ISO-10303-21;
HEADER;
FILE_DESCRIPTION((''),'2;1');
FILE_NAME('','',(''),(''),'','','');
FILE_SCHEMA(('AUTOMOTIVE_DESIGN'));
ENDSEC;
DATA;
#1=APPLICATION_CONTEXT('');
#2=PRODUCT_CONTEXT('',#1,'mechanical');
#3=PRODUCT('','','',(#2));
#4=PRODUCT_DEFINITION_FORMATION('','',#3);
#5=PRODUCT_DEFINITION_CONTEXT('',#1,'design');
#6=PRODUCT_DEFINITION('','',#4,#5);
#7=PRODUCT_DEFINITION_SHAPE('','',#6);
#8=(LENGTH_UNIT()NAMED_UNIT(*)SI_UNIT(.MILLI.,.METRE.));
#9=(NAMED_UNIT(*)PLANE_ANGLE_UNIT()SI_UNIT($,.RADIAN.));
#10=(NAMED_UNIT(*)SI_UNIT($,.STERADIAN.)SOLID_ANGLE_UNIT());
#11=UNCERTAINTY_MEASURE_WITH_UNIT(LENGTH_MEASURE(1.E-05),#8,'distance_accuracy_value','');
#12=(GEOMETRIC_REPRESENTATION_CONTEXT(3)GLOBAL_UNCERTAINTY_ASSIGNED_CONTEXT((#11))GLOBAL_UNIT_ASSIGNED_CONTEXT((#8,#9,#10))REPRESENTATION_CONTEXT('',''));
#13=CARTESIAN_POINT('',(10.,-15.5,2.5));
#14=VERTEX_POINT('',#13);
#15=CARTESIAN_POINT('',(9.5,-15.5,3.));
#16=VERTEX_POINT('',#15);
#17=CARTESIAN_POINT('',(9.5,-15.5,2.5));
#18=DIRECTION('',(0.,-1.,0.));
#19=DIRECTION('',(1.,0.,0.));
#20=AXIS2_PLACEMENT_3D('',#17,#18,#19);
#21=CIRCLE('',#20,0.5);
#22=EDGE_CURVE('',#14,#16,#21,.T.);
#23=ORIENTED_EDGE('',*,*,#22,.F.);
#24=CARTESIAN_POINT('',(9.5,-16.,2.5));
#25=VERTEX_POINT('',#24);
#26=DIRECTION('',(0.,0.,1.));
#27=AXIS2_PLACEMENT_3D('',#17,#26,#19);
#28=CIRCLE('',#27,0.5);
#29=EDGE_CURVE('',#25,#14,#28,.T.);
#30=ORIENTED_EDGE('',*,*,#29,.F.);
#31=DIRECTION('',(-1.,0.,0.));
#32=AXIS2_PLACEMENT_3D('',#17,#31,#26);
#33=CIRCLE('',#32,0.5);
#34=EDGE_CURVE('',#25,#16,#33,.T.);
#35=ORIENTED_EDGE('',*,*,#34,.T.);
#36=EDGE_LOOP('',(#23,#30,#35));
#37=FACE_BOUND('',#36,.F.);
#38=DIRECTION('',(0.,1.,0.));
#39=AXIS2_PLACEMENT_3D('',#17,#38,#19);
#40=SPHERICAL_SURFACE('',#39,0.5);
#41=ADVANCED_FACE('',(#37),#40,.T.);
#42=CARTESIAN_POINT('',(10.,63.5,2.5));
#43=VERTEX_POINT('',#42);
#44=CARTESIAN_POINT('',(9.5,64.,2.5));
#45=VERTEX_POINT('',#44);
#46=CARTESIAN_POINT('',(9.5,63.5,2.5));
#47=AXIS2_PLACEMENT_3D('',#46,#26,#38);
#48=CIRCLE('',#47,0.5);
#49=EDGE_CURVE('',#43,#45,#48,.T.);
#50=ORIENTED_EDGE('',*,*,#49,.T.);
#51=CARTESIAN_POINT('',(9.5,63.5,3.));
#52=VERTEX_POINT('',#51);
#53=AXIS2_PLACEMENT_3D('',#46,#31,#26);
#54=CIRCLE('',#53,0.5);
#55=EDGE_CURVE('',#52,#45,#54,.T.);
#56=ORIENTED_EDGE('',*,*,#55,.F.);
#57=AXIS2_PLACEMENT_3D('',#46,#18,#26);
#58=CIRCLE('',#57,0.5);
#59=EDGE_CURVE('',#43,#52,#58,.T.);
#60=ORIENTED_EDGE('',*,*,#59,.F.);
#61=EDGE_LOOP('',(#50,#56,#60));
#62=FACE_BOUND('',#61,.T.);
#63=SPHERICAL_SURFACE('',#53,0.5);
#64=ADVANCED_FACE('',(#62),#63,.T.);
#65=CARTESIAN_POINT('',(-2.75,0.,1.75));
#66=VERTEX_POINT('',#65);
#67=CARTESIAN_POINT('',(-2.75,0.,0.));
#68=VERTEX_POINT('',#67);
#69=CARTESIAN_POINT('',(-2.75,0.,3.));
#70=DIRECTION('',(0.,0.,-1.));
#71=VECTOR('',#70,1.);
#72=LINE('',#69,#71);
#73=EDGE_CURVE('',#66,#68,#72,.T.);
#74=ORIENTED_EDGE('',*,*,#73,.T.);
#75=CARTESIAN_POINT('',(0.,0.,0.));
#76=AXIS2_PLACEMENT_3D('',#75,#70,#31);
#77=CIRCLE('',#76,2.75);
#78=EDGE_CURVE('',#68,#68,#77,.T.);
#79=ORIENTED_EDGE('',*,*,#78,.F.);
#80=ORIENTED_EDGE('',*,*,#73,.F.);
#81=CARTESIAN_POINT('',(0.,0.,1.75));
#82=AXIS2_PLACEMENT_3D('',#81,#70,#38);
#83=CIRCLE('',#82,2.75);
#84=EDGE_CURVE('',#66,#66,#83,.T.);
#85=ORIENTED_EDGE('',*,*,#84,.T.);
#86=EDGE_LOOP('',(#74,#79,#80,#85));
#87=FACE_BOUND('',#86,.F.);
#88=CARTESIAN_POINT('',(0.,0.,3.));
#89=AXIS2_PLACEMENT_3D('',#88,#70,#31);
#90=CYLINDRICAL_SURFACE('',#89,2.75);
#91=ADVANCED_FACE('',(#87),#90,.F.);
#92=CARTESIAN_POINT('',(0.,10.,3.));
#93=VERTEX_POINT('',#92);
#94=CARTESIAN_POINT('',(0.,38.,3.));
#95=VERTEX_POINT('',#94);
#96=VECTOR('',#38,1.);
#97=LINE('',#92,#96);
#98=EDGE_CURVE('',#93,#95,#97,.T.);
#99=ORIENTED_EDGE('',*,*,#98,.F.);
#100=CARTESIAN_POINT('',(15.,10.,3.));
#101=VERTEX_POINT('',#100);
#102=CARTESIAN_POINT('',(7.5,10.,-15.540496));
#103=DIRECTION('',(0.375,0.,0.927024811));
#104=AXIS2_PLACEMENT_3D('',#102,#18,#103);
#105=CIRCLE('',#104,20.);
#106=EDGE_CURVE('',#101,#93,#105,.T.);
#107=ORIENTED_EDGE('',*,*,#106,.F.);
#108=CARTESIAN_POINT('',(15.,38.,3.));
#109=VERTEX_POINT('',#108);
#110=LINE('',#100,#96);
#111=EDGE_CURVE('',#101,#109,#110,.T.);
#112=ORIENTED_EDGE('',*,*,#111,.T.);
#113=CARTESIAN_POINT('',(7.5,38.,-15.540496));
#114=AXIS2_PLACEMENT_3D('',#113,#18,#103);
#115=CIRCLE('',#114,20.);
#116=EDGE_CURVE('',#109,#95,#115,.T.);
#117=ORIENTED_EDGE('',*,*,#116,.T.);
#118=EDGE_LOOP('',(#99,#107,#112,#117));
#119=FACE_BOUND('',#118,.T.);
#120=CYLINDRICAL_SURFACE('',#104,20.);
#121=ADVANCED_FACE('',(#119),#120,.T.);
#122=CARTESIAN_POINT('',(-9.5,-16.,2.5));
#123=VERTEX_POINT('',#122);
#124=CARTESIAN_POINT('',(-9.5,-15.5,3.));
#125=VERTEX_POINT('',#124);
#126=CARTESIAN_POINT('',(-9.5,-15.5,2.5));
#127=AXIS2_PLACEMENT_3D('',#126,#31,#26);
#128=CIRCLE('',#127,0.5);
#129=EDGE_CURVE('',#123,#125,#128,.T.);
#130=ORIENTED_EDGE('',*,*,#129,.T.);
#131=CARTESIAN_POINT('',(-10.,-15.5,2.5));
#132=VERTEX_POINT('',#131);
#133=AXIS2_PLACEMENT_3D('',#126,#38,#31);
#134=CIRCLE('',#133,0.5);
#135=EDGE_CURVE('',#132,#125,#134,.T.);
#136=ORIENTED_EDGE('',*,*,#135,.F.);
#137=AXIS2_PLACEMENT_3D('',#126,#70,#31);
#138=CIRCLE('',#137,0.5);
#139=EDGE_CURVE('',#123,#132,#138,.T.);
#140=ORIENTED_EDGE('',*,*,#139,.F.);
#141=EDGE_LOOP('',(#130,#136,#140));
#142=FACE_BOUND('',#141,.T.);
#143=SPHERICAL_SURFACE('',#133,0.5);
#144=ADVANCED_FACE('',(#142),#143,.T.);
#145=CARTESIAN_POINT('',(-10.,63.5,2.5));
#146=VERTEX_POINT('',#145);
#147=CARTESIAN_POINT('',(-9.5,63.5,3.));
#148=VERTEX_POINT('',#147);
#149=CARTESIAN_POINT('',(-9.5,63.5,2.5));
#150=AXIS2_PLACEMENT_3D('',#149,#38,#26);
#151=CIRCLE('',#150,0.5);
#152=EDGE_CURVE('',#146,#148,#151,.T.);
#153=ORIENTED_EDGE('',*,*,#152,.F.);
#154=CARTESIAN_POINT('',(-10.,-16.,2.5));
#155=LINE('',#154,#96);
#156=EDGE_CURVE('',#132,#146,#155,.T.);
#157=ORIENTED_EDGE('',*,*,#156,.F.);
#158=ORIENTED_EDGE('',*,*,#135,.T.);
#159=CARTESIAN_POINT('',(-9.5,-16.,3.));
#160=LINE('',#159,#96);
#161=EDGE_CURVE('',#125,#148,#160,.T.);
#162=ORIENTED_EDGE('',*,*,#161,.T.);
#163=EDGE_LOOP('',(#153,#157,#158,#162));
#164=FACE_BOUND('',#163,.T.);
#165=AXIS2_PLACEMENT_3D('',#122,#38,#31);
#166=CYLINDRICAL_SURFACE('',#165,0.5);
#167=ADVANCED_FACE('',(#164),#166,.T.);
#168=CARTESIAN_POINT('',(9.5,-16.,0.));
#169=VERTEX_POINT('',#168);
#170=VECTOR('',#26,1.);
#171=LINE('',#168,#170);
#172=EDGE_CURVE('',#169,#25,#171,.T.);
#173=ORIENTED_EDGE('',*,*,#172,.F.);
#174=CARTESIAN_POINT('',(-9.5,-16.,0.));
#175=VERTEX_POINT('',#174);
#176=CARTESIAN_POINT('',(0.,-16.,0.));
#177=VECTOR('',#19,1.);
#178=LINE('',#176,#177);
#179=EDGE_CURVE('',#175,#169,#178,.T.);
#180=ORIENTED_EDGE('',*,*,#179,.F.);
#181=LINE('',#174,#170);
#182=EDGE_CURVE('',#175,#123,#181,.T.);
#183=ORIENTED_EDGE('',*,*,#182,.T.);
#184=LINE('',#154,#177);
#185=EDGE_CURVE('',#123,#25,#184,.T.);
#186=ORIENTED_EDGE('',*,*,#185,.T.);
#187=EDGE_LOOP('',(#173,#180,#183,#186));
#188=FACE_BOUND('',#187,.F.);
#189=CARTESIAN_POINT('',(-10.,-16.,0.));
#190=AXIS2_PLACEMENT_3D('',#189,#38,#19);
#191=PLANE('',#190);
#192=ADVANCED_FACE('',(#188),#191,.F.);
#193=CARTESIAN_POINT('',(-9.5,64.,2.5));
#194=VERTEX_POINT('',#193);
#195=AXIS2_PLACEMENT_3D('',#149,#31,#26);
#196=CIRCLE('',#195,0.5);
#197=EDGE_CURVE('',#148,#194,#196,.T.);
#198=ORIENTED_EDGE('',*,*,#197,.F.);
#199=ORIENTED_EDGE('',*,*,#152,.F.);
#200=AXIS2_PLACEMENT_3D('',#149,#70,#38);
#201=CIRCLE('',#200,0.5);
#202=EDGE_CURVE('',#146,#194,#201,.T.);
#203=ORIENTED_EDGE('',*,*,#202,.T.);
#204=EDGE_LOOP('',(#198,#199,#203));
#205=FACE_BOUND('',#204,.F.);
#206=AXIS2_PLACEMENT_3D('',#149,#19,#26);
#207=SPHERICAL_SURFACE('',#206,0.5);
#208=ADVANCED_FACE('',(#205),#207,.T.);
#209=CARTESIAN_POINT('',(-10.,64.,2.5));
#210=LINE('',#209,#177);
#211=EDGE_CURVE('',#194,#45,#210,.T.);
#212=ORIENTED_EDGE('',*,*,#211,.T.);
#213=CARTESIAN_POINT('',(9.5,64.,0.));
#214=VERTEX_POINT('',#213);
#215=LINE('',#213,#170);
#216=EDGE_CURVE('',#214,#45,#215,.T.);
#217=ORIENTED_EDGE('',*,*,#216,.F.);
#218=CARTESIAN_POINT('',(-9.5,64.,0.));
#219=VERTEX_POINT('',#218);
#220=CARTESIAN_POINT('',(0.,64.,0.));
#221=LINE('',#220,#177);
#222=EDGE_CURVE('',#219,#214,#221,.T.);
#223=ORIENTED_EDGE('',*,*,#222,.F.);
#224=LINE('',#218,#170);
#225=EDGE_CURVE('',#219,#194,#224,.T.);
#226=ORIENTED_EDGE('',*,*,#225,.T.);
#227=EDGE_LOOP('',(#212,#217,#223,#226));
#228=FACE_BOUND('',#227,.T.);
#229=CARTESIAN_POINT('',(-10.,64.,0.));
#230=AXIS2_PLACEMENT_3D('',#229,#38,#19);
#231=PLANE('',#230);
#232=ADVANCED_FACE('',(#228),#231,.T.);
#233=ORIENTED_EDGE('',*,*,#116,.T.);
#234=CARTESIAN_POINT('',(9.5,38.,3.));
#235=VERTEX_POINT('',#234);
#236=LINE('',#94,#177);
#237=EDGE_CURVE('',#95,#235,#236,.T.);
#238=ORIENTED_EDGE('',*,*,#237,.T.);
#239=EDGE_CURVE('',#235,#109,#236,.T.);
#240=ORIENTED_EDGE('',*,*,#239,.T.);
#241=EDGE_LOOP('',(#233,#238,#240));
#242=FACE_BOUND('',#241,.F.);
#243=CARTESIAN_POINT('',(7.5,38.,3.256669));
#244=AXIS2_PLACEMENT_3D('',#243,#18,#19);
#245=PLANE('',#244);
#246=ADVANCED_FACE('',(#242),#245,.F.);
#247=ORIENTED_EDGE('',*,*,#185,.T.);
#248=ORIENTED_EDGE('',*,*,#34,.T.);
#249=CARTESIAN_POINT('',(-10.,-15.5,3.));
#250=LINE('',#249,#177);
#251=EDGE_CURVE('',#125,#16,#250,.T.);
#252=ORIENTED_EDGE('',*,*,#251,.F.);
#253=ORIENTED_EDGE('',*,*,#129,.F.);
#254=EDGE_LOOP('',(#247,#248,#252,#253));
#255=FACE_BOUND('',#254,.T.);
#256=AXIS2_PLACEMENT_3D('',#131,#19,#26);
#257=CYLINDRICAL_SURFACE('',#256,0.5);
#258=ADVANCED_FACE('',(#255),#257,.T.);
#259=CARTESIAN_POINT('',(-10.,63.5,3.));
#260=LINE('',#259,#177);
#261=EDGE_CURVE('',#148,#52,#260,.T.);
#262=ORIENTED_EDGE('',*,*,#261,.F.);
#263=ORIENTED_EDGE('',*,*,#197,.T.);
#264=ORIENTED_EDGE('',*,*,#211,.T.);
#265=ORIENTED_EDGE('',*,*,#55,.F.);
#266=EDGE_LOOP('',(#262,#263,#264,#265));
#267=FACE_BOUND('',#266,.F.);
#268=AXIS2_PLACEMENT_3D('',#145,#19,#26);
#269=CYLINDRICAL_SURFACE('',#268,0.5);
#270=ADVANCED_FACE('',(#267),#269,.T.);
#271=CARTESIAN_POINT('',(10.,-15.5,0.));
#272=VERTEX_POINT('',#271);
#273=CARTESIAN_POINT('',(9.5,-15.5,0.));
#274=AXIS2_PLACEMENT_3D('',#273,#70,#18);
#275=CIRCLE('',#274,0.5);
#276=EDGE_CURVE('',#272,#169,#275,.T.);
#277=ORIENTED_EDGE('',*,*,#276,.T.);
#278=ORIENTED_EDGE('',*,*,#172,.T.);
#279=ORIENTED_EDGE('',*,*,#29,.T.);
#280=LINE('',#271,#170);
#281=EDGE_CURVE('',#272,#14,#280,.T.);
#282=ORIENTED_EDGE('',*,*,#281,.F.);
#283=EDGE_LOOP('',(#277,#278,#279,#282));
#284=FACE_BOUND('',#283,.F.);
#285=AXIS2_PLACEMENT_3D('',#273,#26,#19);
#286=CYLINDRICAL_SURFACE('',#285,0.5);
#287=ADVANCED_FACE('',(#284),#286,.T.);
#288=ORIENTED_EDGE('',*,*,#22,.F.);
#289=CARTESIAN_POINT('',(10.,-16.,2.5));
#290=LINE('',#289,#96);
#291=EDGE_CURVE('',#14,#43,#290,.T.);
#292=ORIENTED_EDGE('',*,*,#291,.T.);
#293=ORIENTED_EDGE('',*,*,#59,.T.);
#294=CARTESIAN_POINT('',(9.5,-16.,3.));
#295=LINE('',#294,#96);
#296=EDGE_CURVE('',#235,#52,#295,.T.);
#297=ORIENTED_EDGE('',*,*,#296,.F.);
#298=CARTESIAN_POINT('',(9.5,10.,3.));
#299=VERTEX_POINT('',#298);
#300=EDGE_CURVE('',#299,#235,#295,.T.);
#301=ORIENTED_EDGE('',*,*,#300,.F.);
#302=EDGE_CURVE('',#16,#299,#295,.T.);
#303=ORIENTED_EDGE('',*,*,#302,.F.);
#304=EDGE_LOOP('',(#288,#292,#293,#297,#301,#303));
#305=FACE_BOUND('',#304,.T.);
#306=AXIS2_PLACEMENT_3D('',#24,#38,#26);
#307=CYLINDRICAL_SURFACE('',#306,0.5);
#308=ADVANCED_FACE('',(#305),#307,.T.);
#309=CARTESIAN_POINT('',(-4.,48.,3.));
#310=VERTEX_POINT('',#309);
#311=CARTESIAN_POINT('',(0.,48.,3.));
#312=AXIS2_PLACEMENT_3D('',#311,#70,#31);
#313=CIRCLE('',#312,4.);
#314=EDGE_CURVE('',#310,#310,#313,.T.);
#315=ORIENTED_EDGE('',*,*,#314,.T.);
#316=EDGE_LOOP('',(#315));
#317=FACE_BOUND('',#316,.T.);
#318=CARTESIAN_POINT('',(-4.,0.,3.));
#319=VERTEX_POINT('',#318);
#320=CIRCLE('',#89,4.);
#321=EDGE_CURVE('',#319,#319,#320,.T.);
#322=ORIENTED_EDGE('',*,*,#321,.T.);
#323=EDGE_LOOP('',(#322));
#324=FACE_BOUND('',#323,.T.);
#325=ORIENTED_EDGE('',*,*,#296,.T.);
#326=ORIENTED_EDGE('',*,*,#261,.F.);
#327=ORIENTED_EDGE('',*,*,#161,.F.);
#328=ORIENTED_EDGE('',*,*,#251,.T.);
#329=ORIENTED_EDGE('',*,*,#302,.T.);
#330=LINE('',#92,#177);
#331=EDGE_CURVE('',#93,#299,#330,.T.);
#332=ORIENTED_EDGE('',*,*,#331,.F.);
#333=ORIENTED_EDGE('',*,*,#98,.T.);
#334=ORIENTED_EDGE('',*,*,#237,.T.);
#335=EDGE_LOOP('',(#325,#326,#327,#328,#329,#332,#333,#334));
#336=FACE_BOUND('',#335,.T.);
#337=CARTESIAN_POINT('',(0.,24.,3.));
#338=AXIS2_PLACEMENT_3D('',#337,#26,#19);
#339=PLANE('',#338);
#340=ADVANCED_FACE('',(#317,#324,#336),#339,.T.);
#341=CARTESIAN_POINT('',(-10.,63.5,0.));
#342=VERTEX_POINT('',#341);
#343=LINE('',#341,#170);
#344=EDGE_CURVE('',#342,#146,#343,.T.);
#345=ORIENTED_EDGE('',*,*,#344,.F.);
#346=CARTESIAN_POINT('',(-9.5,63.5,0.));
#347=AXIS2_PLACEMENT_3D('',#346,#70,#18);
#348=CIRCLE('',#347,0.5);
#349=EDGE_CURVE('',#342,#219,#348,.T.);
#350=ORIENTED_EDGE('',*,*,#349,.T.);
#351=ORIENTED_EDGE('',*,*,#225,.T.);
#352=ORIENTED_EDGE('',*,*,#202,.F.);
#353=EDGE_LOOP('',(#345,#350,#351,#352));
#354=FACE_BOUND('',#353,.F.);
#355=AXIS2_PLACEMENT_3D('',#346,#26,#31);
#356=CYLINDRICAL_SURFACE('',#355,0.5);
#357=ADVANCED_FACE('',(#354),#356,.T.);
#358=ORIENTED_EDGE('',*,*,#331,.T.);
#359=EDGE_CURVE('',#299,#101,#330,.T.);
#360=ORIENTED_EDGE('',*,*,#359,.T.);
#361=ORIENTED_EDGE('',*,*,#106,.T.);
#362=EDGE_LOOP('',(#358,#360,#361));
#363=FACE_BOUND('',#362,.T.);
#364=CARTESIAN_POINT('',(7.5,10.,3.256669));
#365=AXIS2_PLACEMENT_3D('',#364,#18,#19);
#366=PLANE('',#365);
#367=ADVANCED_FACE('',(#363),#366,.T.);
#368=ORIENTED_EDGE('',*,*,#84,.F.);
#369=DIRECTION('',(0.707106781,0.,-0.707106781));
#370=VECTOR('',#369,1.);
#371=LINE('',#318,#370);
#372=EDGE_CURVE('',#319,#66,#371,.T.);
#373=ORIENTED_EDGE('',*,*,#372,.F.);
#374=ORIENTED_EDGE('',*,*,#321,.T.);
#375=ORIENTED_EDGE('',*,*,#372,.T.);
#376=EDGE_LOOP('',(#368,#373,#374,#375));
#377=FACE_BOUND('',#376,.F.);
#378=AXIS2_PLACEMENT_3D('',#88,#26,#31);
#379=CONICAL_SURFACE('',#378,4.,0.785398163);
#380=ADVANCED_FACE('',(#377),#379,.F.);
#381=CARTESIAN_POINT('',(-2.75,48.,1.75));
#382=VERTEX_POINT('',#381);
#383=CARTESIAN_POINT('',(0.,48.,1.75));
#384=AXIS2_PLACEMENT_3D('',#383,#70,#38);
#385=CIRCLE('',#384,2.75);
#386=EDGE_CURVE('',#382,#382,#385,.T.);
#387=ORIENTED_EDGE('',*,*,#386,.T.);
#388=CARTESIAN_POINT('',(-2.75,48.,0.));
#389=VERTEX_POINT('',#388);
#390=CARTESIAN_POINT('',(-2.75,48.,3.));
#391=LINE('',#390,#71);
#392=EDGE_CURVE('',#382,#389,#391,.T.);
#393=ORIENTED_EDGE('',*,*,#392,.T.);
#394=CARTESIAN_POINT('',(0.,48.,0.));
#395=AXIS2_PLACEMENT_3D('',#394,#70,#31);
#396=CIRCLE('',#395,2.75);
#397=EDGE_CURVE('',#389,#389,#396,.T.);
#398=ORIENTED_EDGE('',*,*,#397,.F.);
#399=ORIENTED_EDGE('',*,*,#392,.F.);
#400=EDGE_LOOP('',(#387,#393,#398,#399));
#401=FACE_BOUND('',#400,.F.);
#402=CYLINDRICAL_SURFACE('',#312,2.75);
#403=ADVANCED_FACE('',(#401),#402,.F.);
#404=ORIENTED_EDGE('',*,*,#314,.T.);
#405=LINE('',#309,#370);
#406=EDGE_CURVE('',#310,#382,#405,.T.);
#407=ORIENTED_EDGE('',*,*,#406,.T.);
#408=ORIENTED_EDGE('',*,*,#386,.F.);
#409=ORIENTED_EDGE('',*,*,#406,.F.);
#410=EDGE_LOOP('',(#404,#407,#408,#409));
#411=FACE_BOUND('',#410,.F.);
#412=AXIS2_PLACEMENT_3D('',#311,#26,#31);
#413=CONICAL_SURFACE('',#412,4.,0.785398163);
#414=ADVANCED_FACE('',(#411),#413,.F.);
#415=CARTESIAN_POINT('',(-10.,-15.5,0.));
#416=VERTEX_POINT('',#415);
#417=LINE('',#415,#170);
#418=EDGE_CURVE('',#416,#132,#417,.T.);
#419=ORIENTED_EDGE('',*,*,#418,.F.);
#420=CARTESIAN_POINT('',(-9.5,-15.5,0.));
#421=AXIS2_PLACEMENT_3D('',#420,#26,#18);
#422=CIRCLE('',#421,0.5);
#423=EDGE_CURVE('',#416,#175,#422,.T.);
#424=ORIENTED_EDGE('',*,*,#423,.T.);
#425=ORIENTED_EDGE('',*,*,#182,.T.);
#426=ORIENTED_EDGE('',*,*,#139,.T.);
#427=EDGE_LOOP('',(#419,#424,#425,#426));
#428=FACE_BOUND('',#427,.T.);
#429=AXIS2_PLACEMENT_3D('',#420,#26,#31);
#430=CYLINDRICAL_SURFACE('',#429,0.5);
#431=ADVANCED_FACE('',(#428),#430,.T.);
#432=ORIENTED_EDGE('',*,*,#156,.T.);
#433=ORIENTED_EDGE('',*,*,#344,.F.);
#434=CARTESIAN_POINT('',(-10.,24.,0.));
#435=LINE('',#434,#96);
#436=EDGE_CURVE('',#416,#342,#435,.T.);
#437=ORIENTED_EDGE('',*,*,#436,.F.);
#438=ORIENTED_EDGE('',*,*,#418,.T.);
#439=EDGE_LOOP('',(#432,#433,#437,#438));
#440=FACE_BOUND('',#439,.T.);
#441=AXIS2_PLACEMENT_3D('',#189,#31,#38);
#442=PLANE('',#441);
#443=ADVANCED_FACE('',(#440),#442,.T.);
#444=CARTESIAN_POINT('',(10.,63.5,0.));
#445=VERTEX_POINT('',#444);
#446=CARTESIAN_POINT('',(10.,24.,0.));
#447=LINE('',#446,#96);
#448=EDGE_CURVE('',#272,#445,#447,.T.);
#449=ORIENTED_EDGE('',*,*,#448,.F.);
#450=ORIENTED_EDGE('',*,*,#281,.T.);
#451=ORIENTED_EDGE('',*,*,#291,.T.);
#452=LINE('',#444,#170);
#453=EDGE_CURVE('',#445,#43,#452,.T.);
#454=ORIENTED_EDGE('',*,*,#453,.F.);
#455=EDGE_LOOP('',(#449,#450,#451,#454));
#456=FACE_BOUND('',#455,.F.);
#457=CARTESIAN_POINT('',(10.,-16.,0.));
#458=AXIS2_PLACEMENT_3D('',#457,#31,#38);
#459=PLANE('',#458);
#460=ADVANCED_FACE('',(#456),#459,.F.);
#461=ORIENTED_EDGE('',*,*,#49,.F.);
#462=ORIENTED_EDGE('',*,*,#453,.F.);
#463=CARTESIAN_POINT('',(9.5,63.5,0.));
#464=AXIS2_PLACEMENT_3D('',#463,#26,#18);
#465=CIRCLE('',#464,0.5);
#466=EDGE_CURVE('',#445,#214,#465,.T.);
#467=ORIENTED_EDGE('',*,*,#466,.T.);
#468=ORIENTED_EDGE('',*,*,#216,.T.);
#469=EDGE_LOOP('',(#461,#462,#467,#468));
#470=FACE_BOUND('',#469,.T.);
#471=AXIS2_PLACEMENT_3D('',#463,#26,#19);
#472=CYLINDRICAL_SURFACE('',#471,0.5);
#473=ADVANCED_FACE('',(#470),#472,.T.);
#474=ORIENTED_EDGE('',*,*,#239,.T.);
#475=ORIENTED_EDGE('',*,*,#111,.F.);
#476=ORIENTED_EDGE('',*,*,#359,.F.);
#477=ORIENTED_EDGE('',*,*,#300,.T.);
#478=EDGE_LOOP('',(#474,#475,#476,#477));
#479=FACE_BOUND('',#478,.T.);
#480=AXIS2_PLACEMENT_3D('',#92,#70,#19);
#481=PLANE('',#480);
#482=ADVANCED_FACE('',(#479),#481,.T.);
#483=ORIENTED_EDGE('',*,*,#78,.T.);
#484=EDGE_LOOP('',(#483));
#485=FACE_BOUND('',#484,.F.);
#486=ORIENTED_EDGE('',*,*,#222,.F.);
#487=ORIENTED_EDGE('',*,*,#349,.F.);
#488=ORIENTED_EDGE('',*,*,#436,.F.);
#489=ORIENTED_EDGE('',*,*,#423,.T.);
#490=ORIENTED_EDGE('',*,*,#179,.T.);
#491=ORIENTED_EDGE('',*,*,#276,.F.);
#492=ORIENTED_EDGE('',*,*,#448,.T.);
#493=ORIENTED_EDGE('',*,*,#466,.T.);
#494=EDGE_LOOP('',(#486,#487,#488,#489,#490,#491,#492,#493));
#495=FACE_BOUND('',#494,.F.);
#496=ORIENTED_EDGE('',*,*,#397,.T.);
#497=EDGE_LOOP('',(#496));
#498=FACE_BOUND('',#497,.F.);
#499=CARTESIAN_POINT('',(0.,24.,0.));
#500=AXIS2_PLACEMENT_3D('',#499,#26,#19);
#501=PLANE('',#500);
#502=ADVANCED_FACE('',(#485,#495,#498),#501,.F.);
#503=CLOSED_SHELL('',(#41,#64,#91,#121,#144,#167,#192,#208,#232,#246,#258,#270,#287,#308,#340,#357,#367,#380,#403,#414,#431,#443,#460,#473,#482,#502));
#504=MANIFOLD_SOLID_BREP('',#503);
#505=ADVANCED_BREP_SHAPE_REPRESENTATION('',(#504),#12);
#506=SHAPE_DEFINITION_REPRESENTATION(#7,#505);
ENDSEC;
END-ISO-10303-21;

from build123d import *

# Parameters (mm, degrees)
F0_W           = 20
F0_H           = 80
F1_DEPTH       = 3
F5_D           = 5.5
F5_DEPTH       = 15
F5_CSINK_D     = 8
F5_CSINK_ANGLE = 90
F5_TIP         = 1.6523667023
F7_R           = 0.5
F10_DEPTH      = 28


# Not quite as in the source:
# - two fillets or chamfers of one size are made in one step


with BuildPart() as f1:
    # F0 (on Top) → F1 (new body)
    with BuildSketch(Plane.XY):
        with Locations((0, 24)):
            Rectangle(F0_W, F0_H)
    extrude(amount=F1_DEPTH)

    # F5
    with Locations(Plane.XY.offset(3)):
        with Locations((0, 0), (0, 48)):
            CounterSinkHole(F5_D / 2, F5_CSINK_D / 2, depth=F5_DEPTH, counter_sink_angle=F5_CSINK_ANGLE)
            with Locations((0, 0, -(F5_DEPTH + F5_TIP / 2))):  # 118° drill point
                Cone(0, F5_D / 2, F5_TIP, mode=Mode.SUBTRACT)

    # F7
    f7_edges = [f1.edges().sort_by_distance(p)[0] for p in [
        (0, 64, 3),
        (-10, 24, 3),
        (10, 24, 3),
        (-10, -16, 1.5),
        (-10, 64, 1.5),
        (10, 64, 1.5),
        (10, -16, 1.5),
        (0, -16, 3),
    ]]
    fillet(f7_edges, radius=F7_R)

    # F9 (on offset) → F10 (join)
    with BuildSketch(Plane.XZ.offset(-10)):
        with BuildLine():
            ThreePointArc((13, 3), (7.5, 3.860863499), (2, 3))
            Line((2, 3), (10, 3))
            Line((10, 3), (13, 3))
        make_face()
        with BuildLine():
            Line((0, 3), (2, 3))
            ThreePointArc((2, 3), (7.5, 3.860863499), (13, 3))
            Line((13, 3), (15, 3))
            ThreePointArc((15, 3), (7.5, 4.4595037823), (0, 3))
        make_face()
    extrude(amount=-F10_DEPTH)


solid = f1.part
